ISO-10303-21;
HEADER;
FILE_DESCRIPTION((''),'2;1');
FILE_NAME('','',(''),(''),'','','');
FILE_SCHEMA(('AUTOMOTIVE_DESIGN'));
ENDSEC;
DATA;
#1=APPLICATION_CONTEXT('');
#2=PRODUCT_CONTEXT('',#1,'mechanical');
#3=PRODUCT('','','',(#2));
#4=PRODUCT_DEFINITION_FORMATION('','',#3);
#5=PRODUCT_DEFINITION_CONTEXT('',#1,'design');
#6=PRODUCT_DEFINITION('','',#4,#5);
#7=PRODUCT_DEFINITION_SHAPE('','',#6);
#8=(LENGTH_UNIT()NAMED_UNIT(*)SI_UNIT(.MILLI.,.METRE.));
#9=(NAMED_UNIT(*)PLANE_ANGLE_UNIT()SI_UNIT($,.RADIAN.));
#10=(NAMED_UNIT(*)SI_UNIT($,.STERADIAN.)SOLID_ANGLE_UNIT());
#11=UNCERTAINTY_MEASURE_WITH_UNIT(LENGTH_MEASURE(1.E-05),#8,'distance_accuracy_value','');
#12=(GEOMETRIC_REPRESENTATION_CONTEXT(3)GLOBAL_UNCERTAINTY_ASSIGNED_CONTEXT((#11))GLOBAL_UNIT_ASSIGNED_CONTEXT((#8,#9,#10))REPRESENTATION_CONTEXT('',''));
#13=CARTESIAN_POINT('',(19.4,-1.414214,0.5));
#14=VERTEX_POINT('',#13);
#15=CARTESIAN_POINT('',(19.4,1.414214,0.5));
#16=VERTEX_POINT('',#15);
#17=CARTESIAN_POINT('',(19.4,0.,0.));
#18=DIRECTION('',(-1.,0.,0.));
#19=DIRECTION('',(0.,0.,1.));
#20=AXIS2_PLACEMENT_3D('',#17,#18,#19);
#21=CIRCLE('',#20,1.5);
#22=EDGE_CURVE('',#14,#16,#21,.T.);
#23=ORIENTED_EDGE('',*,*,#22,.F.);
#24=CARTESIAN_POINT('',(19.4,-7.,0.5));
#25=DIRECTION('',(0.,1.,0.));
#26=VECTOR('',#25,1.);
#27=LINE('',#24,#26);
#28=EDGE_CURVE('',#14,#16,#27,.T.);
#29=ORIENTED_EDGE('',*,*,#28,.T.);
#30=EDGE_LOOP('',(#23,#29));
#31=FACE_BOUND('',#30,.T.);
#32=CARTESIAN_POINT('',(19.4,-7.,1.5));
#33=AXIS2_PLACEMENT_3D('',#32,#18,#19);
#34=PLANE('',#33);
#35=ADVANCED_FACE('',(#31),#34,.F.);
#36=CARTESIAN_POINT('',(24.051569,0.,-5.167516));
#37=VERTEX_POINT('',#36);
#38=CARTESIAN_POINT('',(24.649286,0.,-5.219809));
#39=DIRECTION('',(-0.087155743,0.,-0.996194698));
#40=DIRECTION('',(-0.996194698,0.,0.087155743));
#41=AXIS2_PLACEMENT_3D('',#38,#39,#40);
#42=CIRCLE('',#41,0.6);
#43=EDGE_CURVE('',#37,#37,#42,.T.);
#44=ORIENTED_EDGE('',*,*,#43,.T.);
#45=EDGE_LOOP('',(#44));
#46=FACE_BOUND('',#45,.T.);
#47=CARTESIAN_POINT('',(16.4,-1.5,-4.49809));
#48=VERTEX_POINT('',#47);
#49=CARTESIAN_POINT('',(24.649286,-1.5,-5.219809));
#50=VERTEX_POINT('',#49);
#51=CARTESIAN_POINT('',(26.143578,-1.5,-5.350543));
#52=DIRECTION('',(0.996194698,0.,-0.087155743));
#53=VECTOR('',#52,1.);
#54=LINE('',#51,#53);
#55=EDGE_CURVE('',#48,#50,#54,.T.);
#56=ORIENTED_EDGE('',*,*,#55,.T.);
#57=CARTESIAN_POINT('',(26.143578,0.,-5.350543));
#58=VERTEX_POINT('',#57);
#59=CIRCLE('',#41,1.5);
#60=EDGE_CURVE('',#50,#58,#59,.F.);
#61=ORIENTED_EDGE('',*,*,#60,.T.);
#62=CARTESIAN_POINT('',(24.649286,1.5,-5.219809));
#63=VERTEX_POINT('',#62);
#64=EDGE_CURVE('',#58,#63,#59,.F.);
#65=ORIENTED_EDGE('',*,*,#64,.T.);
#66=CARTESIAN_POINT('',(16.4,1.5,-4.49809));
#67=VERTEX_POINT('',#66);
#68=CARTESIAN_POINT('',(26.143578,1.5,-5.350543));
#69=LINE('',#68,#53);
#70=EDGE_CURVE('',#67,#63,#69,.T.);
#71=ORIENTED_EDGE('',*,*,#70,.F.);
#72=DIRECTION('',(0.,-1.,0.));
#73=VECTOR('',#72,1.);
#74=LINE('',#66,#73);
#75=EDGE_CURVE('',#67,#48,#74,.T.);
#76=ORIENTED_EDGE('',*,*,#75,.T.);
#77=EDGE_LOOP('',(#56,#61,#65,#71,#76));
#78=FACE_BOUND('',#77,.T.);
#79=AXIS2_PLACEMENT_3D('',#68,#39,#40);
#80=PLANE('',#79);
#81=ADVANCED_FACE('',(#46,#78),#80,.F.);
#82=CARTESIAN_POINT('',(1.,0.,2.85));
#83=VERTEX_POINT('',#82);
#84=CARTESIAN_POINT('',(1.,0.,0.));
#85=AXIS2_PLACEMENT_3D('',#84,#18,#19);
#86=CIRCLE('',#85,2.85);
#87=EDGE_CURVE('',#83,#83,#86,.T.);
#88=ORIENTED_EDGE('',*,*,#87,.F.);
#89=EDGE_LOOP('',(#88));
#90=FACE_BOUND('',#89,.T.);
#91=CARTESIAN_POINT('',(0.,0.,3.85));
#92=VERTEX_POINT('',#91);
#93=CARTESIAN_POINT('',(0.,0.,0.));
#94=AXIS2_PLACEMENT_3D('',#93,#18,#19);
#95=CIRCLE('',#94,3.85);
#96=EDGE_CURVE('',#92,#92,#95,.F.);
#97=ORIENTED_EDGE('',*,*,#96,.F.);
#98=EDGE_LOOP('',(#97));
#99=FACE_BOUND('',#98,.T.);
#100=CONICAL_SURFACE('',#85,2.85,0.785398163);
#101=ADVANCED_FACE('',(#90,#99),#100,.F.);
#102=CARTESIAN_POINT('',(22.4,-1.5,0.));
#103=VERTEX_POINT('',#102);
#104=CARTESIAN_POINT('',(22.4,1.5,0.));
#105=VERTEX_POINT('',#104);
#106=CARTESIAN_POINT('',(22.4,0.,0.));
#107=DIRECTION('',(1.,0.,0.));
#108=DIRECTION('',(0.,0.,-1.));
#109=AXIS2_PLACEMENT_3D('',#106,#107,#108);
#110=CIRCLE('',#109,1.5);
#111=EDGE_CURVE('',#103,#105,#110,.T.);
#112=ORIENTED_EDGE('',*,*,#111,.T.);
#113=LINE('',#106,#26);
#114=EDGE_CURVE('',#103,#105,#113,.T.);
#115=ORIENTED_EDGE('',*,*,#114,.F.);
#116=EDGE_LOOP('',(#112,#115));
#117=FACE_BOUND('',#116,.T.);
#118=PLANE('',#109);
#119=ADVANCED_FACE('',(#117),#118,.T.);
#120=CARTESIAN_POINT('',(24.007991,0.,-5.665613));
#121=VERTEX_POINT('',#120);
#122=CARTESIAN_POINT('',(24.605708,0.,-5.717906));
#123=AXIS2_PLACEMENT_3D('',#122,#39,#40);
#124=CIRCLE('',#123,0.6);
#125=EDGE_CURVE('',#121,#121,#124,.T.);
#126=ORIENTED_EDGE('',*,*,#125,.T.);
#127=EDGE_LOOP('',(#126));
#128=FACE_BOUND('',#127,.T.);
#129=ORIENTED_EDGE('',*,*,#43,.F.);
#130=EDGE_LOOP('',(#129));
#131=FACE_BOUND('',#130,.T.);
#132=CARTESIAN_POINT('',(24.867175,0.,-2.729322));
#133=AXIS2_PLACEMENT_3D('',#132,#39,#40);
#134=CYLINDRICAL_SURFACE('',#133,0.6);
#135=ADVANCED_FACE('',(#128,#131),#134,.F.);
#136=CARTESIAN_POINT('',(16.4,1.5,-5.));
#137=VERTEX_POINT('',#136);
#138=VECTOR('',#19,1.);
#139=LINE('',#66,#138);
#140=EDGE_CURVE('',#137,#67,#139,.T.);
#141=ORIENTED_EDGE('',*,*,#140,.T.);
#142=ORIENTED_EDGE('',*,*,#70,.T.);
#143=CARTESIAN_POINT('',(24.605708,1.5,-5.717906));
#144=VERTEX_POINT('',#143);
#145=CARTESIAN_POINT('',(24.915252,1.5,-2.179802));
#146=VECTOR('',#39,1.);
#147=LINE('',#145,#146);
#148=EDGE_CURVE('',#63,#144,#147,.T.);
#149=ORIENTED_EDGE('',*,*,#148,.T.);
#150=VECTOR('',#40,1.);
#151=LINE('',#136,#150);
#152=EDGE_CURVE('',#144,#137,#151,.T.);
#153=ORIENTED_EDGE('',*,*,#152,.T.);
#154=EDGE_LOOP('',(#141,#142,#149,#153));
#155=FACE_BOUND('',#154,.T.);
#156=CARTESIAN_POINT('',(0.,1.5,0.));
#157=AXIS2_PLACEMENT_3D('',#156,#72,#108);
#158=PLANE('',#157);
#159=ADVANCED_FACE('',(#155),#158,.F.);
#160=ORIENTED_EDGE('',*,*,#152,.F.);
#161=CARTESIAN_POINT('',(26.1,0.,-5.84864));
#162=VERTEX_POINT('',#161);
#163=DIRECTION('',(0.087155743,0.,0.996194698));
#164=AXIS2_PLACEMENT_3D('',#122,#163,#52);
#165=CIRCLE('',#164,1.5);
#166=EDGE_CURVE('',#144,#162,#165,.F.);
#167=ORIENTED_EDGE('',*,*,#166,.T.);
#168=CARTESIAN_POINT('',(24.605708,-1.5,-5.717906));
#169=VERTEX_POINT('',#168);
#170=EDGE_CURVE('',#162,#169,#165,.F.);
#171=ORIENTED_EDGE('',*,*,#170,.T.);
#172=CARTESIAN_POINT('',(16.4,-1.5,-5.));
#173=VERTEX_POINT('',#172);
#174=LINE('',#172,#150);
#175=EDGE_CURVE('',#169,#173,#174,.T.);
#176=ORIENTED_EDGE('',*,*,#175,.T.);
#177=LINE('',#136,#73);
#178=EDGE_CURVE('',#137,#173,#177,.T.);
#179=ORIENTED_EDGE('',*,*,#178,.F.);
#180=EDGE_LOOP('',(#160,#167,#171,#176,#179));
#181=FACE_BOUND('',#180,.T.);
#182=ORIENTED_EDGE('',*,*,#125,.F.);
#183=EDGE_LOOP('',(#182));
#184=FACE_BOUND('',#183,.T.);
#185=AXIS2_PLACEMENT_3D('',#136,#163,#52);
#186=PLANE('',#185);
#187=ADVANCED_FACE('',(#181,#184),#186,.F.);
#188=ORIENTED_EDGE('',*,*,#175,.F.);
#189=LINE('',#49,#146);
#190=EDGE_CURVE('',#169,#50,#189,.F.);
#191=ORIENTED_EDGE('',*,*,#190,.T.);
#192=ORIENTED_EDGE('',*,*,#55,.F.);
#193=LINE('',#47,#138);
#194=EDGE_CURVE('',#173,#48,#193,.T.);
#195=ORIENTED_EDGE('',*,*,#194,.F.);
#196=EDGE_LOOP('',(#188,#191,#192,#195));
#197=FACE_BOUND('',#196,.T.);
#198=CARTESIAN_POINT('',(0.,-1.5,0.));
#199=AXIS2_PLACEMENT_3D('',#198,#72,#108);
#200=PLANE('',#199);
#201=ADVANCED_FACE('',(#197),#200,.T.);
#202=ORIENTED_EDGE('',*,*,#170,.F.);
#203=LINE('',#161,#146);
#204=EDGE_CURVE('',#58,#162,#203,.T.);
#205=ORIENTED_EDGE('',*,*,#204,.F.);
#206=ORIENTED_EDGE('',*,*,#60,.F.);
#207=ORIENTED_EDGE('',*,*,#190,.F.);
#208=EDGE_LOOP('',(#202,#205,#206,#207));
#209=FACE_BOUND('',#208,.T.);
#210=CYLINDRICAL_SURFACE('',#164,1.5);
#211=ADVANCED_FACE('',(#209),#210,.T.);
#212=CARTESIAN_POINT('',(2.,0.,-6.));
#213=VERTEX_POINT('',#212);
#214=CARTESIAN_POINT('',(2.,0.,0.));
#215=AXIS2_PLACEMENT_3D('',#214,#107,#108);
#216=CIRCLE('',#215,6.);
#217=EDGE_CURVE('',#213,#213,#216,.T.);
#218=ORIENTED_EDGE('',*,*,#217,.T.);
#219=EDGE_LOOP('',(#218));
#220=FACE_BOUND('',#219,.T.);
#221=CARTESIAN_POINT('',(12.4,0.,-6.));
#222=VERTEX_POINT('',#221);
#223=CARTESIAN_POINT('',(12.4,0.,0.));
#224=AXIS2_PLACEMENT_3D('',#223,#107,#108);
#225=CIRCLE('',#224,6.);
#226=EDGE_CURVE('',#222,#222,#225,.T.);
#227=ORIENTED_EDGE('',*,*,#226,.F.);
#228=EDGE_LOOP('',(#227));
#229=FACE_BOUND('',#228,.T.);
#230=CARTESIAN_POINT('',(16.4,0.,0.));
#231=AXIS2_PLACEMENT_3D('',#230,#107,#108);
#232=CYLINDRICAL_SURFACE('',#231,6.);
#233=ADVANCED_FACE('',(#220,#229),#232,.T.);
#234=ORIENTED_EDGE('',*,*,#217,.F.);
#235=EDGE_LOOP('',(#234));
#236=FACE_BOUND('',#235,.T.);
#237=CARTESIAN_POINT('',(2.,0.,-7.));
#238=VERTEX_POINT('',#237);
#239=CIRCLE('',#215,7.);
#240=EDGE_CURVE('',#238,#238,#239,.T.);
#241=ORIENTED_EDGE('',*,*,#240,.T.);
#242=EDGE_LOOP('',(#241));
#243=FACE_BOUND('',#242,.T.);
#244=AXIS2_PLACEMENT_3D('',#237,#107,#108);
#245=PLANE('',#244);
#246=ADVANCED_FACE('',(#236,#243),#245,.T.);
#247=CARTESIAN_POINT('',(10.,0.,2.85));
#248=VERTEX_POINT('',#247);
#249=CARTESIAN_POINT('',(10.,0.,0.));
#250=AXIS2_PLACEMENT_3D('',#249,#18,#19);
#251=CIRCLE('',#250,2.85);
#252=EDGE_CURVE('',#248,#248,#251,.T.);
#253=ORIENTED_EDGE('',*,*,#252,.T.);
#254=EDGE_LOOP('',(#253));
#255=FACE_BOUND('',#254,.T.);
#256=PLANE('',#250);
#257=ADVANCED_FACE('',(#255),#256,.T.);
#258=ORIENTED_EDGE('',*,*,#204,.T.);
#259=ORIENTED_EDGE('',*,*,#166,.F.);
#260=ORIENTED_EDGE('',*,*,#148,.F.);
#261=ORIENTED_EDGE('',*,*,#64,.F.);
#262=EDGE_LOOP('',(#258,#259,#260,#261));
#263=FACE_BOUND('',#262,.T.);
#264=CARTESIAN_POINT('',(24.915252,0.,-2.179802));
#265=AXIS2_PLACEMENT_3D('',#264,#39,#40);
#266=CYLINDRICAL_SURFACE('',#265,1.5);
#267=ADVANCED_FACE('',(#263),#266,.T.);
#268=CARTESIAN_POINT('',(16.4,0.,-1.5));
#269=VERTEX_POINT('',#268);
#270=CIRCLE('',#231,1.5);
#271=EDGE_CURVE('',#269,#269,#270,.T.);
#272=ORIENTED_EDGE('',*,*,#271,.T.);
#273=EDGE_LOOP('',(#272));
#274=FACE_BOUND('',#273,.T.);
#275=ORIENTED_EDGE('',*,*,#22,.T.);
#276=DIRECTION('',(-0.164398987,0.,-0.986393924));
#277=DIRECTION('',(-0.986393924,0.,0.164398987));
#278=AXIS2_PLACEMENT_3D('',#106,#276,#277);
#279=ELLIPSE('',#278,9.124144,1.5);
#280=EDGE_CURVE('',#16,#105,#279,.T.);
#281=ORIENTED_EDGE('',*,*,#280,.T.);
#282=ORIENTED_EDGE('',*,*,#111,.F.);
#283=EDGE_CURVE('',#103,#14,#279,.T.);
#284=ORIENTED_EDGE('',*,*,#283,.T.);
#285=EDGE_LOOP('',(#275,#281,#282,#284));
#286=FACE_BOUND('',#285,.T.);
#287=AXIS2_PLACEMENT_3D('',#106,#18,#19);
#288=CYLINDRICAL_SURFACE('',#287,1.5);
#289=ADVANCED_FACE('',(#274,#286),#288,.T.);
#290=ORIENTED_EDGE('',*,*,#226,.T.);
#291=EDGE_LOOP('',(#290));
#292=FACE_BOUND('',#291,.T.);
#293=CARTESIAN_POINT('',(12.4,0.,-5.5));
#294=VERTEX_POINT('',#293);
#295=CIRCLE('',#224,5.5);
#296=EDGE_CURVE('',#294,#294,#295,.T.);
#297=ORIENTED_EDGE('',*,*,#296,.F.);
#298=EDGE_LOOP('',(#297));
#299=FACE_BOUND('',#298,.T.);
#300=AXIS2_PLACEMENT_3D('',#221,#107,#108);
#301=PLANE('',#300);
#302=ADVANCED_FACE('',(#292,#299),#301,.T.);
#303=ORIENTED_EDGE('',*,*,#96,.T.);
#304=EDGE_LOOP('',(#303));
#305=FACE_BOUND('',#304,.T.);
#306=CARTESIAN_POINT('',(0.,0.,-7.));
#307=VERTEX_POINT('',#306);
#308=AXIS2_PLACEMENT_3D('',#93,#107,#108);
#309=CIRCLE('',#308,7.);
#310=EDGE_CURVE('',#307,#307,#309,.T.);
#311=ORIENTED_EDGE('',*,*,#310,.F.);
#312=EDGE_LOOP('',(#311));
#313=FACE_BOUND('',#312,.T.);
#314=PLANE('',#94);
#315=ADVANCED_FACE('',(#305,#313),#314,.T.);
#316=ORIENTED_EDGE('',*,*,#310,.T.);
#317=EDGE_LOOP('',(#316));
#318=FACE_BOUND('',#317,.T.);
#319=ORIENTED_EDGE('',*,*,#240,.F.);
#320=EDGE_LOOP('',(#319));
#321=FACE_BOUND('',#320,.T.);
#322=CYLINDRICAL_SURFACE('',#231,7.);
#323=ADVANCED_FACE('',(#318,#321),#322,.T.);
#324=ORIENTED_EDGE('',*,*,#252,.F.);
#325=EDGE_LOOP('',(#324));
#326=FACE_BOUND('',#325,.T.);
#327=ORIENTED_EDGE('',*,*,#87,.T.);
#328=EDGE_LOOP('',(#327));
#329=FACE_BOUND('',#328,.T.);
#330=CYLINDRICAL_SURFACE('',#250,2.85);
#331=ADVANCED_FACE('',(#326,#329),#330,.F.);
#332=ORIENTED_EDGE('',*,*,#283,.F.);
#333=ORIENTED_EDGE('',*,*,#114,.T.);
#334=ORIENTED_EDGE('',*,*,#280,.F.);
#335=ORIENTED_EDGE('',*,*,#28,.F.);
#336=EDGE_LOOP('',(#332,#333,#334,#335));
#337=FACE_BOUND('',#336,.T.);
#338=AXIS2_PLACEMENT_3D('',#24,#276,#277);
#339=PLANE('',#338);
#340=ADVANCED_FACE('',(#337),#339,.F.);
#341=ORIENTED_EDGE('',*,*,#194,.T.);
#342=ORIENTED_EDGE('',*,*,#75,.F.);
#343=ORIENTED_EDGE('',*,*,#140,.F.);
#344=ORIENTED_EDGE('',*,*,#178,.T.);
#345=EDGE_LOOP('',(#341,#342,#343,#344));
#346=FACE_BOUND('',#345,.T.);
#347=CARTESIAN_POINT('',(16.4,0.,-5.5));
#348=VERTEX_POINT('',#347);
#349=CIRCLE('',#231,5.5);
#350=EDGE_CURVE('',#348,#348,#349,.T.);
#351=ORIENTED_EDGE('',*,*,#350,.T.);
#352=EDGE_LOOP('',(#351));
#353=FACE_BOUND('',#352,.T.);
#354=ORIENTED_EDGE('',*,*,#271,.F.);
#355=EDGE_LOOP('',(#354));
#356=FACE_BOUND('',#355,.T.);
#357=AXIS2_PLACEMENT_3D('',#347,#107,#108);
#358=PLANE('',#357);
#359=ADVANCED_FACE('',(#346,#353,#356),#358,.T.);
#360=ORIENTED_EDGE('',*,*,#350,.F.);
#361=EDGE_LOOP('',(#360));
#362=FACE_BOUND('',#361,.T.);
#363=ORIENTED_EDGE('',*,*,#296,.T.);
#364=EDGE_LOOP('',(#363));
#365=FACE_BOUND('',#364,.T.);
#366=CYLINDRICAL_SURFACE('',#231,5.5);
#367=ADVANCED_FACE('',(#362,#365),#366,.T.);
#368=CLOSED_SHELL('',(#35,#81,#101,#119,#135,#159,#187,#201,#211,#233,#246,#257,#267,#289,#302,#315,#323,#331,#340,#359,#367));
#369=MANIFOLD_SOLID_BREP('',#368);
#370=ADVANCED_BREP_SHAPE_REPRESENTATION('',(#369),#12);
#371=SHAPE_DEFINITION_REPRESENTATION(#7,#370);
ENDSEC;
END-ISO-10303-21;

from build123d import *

# Parameters (mm, degrees)
SKETCH2_R               = 2.85
CUT_EXTRUDE1_DEPTH      = 10
CHAMFER1_SIZE           = 1
SKETCH4_R               = 1.5
BOSS_EXTRUDE1_DEPTH     = 6
CUT_EXTRUDE2_DEPTH      = 25.489997958
CUT_EXTRUDE2_DEPTH_BACK = 25.489997958
BOSS_EXTRUDE2_DEPTH     = 1.5
FILLET1_R               = 1.5
SKETCH7_R               = 0.6
CUT_EXTRUDE3_DEPTH      = 3


with BuildPart() as part:
    # Sketch1 → Revolve1 (revolve)
    with BuildSketch(Plane(origin=(0, 0, 0), x_dir=(1, 0, 0), z_dir=(0, 1, 0))):
        Polygon((0, 0), (0, 7), (2, 7), (2, 6), (12.4, 6), (12.4, 5.5), (16.4, 5.5), (16.4, 0), align=None)
    revolve(axis=Axis((16.4, 0, 0), (-1, 0, 0)))

    # Sketch2 → Cut-Extrude1 (cut)
    with BuildSketch(Plane.ZY):
        Circle(SKETCH2_R)
    extrude(amount=-CUT_EXTRUDE1_DEPTH, mode=Mode.SUBTRACT)

    # Chamfer1
    chamfer1_edges = [part.edges().sort_by_distance(p)[0] for p in [
        (0, 0, -2.85),
    ]]
    chamfer(chamfer1_edges, length=CHAMFER1_SIZE)

    # Sketch4 → Boss-Extrude1 (add)
    with BuildSketch(Plane(origin=(16.4, 0, 0), x_dir=(0, 0, -1), z_dir=(1, 0, 0))):
        Circle(SKETCH4_R)
    extrude(amount=BOSS_EXTRUDE1_DEPTH)

    # Sketch5 → Cut-Extrude2 (cut, two sides: drawn at the far end of the back side and taken through both)
    with BuildSketch(Plane(origin=(0, 0, 0), x_dir=(1, 0, 0), z_dir=(0, 1, 0)).offset(-CUT_EXTRUDE2_DEPTH_BACK)):
        Polygon((22.4, -1.5), (19.4, -1.5), (19.4, -0.5), (22.4, 0), align=None)
    extrude(amount=CUT_EXTRUDE2_DEPTH + CUT_EXTRUDE2_DEPTH_BACK, mode=Mode.SUBTRACT)

    # Sketch6 → Boss-Extrude2 (add, symmetric)
    with BuildSketch(Plane(origin=(0, 0, 0), x_dir=(1, 0, 0), z_dir=(0, 1, 0))):
        Polygon((16.4, 5), (26.1, 5.848640036), (26.143577871, 5.350542687), (16.4, 4.498090081), align=None)
    extrude(amount=BOSS_EXTRUDE2_DEPTH, both=True)

    # Fillet1
    fillet1_edges = [part.edges().sort_by_distance(p)[0] for p in [
        (26.121788936, 1.5, -5.599591362),
        (26.121788936, -1.5, -5.599591362),
    ]]
    fillet(fillet1_edges, radius=FILLET1_R - 0.0001)  # a hair under: the kernel refuses the full size

    # Sketch7 → Cut-Extrude3 (cut)
    with BuildSketch(Plane(origin=(-0.309544019, 0, -3.538104326), x_dir=(-0.9961946980917462, 0, 0.08715574274765167), z_dir=(-0.08715574274765167, 0, -0.9961946980917462))):
        with Locations((-25.010424187, 0)):
            Circle(SKETCH7_R)
    extrude(amount=-CUT_EXTRUDE3_DEPTH, mode=Mode.SUBTRACT)


solid = part.part
